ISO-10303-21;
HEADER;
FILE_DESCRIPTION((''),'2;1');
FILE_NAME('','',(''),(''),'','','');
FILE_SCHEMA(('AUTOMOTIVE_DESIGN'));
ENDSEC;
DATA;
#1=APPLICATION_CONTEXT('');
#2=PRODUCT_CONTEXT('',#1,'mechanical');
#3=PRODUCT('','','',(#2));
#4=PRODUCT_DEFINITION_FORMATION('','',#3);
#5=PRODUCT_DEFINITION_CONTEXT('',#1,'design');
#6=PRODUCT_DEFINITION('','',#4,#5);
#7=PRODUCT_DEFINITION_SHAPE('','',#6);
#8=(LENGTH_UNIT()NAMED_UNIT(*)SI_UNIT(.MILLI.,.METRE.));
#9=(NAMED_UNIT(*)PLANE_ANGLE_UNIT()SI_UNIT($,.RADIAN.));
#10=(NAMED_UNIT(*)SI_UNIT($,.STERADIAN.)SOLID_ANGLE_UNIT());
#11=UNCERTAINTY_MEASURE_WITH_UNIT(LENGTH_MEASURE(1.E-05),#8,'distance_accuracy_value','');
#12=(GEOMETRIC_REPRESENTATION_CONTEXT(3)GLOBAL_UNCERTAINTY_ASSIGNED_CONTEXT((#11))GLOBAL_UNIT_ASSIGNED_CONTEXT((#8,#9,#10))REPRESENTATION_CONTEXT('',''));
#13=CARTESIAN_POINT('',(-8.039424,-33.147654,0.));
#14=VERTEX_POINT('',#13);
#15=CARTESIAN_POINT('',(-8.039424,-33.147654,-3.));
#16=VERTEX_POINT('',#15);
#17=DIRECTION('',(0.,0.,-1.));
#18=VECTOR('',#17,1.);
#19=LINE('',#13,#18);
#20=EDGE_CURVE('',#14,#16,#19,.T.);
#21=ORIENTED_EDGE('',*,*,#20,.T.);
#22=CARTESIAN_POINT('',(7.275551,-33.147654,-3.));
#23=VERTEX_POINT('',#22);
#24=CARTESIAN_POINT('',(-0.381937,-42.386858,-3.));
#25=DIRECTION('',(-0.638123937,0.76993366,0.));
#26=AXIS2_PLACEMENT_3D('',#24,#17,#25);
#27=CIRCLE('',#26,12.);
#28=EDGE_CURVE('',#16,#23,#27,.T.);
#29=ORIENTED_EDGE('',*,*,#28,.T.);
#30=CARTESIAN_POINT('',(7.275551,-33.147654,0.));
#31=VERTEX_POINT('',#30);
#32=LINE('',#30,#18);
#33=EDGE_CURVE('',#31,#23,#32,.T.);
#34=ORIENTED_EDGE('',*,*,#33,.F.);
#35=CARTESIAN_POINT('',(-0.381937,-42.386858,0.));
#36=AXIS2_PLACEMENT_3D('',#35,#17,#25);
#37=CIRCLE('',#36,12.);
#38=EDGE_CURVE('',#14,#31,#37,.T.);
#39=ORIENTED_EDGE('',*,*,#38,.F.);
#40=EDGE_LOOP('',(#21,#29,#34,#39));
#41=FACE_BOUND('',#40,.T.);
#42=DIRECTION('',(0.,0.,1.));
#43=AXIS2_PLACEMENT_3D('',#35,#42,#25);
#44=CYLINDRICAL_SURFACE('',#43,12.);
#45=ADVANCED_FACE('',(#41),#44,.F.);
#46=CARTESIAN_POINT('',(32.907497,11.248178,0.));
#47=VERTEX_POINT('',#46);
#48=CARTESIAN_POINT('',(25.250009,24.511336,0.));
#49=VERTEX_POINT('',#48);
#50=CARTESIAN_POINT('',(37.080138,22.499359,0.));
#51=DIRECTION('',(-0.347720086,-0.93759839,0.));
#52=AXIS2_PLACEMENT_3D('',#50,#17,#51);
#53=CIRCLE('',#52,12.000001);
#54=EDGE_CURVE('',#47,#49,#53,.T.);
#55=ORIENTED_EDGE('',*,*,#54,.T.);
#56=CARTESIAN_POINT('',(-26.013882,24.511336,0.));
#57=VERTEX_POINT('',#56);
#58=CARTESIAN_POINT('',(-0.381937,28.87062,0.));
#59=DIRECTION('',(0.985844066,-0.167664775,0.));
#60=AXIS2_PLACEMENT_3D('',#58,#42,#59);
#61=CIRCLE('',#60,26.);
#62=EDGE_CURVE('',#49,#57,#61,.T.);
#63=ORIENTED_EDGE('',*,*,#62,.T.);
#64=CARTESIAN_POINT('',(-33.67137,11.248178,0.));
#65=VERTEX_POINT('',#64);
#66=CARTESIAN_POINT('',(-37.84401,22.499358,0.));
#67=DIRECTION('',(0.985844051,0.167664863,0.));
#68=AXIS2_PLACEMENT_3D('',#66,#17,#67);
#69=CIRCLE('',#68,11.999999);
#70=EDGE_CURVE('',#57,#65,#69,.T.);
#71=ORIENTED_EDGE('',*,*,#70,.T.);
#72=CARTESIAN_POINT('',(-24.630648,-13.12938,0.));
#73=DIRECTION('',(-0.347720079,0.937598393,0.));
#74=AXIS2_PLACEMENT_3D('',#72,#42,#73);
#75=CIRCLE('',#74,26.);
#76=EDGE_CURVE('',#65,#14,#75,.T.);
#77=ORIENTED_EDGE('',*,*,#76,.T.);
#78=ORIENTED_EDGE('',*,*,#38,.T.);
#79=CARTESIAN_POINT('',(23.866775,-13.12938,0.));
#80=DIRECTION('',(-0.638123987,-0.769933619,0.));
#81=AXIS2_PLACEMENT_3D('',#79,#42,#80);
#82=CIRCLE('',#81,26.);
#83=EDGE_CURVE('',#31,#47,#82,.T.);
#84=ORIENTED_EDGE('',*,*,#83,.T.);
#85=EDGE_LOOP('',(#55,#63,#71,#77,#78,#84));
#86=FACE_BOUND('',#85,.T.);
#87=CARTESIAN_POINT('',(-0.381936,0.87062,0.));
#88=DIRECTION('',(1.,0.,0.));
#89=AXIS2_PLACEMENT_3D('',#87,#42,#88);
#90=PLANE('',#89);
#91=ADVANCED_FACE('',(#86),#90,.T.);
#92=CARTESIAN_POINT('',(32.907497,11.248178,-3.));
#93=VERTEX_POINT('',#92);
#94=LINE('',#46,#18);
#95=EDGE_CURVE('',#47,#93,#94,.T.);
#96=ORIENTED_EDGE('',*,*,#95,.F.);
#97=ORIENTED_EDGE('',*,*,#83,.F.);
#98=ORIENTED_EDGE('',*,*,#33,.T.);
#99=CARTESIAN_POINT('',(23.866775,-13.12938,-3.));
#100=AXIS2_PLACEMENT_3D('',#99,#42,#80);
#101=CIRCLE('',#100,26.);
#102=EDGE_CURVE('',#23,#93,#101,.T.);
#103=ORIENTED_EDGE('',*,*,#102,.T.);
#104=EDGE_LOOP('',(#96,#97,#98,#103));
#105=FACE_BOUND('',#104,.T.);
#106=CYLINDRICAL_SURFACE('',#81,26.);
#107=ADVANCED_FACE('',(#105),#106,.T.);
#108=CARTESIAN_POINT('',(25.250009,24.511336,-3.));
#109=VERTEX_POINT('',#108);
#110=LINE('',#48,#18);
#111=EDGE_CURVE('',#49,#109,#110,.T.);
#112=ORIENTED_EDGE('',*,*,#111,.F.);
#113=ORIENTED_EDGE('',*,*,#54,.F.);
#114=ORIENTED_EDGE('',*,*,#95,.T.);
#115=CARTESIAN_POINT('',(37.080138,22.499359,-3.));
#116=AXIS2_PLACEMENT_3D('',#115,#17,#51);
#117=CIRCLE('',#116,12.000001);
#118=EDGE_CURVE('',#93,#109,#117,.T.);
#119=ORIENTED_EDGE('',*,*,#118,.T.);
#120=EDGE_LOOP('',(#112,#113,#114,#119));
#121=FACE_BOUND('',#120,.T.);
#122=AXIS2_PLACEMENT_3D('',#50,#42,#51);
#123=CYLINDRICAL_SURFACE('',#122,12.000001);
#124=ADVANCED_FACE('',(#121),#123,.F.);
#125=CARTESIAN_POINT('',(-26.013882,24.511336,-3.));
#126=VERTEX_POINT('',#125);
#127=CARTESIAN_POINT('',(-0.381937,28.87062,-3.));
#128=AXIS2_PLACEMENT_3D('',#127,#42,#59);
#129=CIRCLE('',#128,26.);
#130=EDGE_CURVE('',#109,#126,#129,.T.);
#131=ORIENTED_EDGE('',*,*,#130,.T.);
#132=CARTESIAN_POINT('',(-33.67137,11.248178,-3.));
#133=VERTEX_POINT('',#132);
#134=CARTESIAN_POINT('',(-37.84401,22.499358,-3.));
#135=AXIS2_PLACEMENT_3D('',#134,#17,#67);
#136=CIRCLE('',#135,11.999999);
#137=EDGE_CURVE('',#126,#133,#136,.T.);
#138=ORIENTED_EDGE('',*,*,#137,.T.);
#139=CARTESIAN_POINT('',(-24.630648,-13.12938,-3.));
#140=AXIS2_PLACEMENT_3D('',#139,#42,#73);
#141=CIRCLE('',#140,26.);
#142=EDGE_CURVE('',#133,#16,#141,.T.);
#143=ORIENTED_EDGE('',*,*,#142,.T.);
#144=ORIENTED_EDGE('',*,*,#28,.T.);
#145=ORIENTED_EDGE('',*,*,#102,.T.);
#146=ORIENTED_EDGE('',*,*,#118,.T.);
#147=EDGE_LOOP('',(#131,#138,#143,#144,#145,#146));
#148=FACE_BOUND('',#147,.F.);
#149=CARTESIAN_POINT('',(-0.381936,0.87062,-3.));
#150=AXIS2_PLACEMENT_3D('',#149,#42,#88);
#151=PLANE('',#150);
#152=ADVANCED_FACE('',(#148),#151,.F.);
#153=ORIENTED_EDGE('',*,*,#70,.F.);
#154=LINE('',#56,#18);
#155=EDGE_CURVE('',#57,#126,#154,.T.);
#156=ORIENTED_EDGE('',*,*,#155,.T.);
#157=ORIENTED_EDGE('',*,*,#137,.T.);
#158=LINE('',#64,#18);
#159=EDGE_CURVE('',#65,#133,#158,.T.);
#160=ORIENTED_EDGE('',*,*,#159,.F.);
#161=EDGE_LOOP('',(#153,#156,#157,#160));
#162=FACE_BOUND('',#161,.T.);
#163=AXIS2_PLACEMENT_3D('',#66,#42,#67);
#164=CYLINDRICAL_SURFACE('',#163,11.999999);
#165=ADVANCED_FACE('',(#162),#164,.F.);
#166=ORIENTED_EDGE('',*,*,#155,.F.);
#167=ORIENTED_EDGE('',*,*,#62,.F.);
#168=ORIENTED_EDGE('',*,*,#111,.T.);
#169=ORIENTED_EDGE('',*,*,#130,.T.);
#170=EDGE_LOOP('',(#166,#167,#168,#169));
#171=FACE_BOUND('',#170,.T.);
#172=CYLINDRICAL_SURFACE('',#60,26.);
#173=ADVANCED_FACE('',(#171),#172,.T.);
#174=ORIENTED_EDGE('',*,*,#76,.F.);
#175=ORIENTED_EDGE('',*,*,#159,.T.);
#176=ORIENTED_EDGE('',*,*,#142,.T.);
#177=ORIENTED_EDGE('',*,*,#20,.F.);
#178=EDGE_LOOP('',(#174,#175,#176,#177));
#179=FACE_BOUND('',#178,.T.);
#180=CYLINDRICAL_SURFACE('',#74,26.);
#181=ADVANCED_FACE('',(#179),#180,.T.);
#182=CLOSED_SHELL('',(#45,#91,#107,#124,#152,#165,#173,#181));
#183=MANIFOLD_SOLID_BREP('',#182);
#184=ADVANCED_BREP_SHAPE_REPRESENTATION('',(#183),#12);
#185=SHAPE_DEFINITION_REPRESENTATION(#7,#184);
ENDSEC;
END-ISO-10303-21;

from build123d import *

# Parameters (mm, degrees)
F1_DEPTH = 3


# Not quite as in the source:
# - ends of sketch curves that miss each other by under 0.0002 mm in the source are joined


with BuildPart() as f1:
    # F0 (on Top) → F1 (new body)
    with BuildSketch(Plane.XY):
        with BuildLine():
            ThreePointArc((32.9074971055, 11.248177677), (26.6878329895, 16.4993586176), (25.2500089531, 24.5113362153))
            ThreePointArc((25.2500089531, 24.5113362153), (-0.3819362324, 54.8706200704), (-26.0138819919, 24.5113361177))
            ThreePointArc((-26.0138819919, 24.5113361177), (-27.4517054543, 16.4993586176), (-33.6713695703, 11.248177677))
            ThreePointArc((-33.6713695703, 11.248177677), (-47.1473080368, -26.1293799296), (-8.0394240132, -33.1476541294))
            ThreePointArc((-8.0394240132, -33.1476541294), (-0.3819362324, -30.3868579581), (7.2755513239, -33.1476544003))
            ThreePointArc((7.2755513239, -33.1476544003), (46.383435572, -26.1293799296), (32.9074971055, 11.248177677))
        make_face()
    extrude(amount=-F1_DEPTH)


solid = f1.part
